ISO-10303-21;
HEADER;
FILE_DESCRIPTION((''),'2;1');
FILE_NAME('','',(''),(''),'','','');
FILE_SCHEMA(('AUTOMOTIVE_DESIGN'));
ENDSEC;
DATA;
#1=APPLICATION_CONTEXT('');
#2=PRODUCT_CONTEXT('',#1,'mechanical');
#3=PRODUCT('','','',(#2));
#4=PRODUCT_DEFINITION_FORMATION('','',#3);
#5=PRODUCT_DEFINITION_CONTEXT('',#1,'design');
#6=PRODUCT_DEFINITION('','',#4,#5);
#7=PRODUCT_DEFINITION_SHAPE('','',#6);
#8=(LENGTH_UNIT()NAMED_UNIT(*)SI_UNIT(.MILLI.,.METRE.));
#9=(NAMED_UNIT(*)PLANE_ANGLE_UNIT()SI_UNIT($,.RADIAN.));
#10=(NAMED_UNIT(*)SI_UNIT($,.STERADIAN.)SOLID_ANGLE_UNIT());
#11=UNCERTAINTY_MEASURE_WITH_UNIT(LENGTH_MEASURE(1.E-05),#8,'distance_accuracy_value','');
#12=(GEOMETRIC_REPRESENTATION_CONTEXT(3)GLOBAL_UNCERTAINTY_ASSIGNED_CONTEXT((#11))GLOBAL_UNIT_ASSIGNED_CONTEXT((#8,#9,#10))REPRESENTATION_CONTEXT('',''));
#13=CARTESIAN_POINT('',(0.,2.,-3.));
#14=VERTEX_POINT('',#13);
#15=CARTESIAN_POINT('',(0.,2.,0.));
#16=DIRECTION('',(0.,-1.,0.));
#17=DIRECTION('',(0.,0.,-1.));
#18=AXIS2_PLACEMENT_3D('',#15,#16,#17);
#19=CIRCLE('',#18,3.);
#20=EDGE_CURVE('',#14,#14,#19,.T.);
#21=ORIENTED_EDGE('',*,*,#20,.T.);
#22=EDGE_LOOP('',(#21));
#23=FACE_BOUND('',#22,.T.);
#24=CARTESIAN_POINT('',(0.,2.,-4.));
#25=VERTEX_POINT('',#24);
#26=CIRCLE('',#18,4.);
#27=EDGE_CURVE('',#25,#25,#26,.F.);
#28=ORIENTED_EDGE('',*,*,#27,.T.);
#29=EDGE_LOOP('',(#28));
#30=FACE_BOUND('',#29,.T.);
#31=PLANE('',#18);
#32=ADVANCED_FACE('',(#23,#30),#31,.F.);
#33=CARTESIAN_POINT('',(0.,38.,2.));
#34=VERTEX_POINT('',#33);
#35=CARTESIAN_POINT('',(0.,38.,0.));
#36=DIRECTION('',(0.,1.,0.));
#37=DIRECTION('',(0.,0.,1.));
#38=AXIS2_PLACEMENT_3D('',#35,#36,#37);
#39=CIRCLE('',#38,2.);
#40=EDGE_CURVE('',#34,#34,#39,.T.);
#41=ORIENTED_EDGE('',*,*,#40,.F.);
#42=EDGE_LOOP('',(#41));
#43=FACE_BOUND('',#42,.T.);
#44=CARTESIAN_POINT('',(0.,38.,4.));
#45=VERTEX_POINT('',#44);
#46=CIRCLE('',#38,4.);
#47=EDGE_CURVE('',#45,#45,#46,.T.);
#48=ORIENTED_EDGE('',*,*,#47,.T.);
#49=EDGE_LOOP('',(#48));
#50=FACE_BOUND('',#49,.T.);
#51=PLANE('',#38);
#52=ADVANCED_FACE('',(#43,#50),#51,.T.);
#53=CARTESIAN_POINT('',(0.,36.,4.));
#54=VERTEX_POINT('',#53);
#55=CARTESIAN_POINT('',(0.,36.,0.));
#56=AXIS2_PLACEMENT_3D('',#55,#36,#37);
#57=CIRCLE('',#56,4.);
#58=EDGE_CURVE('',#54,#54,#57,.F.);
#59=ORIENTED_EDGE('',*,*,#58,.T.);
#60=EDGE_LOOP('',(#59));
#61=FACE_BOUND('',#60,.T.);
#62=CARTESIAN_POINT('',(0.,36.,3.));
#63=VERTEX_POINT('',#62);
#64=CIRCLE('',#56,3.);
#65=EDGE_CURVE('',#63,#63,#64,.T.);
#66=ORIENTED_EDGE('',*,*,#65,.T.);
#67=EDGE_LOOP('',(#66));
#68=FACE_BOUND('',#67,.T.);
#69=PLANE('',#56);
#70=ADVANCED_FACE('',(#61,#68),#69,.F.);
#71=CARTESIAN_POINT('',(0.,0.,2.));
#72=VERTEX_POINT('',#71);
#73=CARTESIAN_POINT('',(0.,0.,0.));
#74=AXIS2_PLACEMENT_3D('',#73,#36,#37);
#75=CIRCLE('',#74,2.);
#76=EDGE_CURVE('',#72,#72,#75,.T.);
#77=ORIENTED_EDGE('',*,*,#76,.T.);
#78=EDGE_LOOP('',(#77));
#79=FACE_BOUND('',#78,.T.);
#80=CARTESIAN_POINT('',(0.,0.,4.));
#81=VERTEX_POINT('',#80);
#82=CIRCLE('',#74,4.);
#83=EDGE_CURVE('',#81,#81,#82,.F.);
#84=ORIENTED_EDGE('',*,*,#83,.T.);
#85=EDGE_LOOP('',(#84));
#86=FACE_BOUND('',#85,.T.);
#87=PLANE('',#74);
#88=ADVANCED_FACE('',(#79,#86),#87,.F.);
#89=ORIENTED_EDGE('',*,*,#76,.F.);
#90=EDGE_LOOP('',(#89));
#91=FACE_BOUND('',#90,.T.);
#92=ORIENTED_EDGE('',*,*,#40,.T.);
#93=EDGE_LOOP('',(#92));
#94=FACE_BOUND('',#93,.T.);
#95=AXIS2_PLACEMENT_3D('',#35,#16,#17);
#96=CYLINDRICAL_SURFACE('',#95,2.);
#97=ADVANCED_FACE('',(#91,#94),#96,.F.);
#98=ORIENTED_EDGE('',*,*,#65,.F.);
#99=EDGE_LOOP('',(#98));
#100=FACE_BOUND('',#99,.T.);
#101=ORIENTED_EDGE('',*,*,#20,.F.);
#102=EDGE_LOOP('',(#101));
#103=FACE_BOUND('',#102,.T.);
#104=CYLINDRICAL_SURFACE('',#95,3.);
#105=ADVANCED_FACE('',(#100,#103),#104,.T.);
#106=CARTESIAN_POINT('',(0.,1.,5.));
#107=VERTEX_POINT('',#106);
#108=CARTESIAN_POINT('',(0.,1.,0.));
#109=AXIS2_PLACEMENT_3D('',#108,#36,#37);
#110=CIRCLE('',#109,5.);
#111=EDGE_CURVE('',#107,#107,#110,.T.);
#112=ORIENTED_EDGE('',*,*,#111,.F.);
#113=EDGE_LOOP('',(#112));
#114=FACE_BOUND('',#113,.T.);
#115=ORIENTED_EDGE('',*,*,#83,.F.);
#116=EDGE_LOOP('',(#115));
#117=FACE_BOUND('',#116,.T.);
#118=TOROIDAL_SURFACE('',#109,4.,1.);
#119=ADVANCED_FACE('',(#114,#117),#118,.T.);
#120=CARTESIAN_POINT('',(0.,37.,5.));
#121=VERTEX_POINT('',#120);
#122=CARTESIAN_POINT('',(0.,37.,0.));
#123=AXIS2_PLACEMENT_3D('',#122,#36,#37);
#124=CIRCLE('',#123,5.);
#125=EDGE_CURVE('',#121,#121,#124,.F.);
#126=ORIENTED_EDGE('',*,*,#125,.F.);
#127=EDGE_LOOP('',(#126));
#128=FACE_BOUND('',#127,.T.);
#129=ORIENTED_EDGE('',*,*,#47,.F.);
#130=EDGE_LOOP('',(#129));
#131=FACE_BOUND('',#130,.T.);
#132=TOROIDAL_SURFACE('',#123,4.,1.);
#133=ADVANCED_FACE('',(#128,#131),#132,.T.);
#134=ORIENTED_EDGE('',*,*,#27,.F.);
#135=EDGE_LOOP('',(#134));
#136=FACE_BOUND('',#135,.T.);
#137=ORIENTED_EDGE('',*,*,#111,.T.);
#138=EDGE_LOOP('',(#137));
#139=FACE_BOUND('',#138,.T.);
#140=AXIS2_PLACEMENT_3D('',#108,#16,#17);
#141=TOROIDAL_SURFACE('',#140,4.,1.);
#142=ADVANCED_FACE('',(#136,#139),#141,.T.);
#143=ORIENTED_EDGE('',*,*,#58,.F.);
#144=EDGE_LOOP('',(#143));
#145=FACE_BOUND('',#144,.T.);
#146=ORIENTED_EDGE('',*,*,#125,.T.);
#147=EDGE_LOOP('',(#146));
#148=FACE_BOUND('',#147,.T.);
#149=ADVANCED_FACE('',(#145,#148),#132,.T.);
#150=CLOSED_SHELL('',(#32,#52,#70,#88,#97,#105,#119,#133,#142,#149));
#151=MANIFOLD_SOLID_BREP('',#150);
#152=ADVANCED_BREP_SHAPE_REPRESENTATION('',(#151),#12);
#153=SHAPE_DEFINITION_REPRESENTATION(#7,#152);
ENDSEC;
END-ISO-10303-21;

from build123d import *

# Parameters (mm, degrees)
SKETCH1_R           = 3
SKETCH1_R_2         = 2
BOSS_EXTRUDE1_DEPTH = 38
SKETCH2_R           = 5
SKETCH2_R_2         = 3
BOSS_EXTRUDE2_DEPTH = 2
BOSS_EXTRUDE3_START = -2
SKETCH3_R           = 5
SKETCH3_R_2         = 3
BOSS_EXTRUDE3_DEPTH = 2
FILLET4_R           = 1
FILLET5_R           = 1
FILLET6_R           = 1


with BuildPart() as part:
    # Sketch1 → Boss-Extrude1 (new body)
    with BuildSketch(Plane(origin=(0, 0, 0), x_dir=(1, 0, 0), z_dir=(0, 1, 0))):
        with Locations(Location((0, 0, 0), (0, 0, 270))):
            Circle(SKETCH1_R)
        with Locations(Location((0, 0, 0), (0, 0, 270))):
            Circle(SKETCH1_R_2, mode=Mode.SUBTRACT)
    extrude(amount=BOSS_EXTRUDE1_DEPTH)

    # Sketch2 → Boss-Extrude2 (add)
    with BuildSketch(Plane.XZ):
        with Locations(Location((0, 0, 0), (0, 0, 270))):
            Circle(SKETCH2_R)
        with Locations(Location((0, 0, 0), (0, 0, 270))):
            Circle(SKETCH2_R_2, mode=Mode.SUBTRACT)
    extrude(amount=-BOSS_EXTRUDE2_DEPTH)

    # Sketch3 → Boss-Extrude3 (add)
    with BuildSketch(Plane(origin=(0, 38, 0), x_dir=(1, 0, 0), z_dir=(0, 1, 0)).offset(BOSS_EXTRUDE3_START)):
        with Locations(Location((0, 0, 0), (0, 0, 90))):
            Circle(SKETCH3_R)
        with Locations(Location((0, 0, 0), (0, 0, 90))):
            Circle(SKETCH3_R_2, mode=Mode.SUBTRACT)
    extrude(amount=BOSS_EXTRUDE3_DEPTH)

    # Fillet4
    fillet4_edges = [part.edges().sort_by_distance(p)[0] for p in [
        (0, 0, 5),
    ]]
    fillet(fillet4_edges, radius=FILLET4_R)

    # Fillet5
    fillet5_edges = [part.edges().sort_by_distance(p)[0] for p in [
        (0, 2, 5),
    ]]
    fillet(fillet5_edges, radius=FILLET5_R - 0.0001)  # a hair under: the kernel refuses the full size

    # Fillet6
    fillet6_edges = [part.edges().sort_by_distance(p)[0] for p in [
        (0, 36, 5),
        (0, 38, 5),
    ]]
    fillet(fillet6_edges, radius=FILLET6_R - 0.0001)  # a hair under: the kernel refuses the full size


solid = part.part
